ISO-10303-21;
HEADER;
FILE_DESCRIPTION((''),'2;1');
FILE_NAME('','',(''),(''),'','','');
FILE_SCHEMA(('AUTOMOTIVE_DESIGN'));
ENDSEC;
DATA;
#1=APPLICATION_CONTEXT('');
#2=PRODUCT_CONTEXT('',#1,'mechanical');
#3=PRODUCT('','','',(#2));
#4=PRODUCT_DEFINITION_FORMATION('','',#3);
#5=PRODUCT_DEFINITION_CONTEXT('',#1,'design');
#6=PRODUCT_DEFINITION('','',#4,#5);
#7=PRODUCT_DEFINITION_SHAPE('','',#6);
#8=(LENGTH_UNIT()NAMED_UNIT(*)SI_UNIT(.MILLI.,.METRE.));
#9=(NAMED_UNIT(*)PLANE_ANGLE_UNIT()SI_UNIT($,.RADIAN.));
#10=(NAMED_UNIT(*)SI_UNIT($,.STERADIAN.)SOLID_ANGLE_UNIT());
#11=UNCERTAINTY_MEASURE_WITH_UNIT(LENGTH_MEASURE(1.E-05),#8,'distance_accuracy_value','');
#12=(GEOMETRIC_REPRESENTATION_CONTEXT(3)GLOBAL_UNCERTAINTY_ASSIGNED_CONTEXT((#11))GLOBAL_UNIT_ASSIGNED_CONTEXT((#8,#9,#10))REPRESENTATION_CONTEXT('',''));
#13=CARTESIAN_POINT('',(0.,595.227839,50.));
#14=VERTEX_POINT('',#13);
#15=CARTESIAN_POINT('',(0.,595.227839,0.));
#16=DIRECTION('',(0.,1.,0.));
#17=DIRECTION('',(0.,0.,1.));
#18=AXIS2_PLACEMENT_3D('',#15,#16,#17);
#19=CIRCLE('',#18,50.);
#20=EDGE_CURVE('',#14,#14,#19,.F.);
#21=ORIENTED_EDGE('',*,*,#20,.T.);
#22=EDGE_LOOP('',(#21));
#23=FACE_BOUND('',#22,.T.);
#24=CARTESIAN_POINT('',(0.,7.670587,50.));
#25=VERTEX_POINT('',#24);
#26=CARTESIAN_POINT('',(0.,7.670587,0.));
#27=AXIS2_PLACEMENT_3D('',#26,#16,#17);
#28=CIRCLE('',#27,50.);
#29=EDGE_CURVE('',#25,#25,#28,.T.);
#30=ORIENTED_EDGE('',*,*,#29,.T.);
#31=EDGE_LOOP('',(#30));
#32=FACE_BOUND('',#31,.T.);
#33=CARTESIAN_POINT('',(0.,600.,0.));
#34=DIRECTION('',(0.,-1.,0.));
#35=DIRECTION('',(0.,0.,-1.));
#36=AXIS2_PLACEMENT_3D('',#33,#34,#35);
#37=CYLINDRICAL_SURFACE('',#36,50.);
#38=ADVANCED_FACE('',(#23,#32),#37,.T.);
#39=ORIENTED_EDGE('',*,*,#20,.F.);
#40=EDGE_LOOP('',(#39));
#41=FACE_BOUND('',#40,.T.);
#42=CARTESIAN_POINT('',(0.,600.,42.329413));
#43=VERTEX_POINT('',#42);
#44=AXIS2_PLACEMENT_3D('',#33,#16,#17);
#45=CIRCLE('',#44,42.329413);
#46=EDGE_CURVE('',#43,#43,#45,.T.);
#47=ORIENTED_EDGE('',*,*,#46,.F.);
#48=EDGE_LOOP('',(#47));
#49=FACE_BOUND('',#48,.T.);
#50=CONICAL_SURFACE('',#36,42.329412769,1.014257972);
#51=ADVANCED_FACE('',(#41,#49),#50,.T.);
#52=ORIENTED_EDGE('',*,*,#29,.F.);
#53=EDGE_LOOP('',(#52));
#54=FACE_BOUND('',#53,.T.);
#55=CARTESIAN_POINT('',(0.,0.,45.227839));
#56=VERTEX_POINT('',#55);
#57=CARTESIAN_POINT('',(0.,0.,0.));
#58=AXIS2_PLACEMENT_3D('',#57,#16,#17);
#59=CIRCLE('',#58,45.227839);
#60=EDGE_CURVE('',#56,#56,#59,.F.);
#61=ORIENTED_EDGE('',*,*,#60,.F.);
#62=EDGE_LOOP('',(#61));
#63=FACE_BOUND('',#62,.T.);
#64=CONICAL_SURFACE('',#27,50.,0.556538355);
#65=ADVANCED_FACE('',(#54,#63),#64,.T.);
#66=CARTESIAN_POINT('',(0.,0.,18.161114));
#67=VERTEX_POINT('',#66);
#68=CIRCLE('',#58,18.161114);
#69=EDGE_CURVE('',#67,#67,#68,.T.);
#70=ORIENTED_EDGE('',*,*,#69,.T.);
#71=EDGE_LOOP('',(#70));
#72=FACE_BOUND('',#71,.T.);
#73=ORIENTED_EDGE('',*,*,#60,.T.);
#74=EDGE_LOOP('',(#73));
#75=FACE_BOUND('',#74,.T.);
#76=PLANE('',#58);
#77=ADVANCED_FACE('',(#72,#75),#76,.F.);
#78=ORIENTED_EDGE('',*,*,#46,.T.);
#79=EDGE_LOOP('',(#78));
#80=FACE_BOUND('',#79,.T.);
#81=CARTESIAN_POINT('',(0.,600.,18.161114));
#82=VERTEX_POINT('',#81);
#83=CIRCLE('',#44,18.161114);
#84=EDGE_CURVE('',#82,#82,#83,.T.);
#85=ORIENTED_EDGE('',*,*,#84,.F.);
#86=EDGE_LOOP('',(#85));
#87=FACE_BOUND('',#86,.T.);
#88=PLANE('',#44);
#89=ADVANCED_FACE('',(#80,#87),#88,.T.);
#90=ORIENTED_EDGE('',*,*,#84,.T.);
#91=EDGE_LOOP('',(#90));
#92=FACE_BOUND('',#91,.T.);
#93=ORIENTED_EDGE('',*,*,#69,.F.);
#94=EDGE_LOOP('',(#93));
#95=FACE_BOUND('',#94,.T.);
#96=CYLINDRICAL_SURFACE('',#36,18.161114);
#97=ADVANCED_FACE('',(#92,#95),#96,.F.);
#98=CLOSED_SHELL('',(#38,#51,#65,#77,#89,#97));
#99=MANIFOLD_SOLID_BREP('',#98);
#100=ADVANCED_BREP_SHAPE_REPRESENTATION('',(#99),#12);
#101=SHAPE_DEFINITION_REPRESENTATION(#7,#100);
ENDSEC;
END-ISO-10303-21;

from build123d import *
from OCP.BRepFilletAPI import BRepFilletAPI_MakeChamfer

# Parameters (mm, degrees)
SKETCH1_R           = 50
BOSS_EXTRUDE1_DEPTH = 600
SKETCH2_R           = 18.161114409
CUT_EXTRUDE1_DEPTH  = 605.15229868
CHAMFER1_SIZE       = 4.77216119
CHAMFER1_SIZE2      = 7.670587231


with BuildPart() as part:
    # Sketch1 → Boss-Extrude1 (new body)
    with BuildSketch(Plane(origin=(0, 0, 0), x_dir=(1, 0, 0), z_dir=(0, 1, 0))):
        Circle(SKETCH1_R)
    extrude(amount=BOSS_EXTRUDE1_DEPTH)

    # Sketch2 → Cut-Extrude1 (cut, through all)
    with BuildSketch(Plane(origin=(0, 0, 0), x_dir=(1, 0, 0), z_dir=(0, 1, 0))):
        Circle(SKETCH2_R)
    extrude(amount=CUT_EXTRUDE1_DEPTH, mode=Mode.SUBTRACT)

    # Chamfer1: one chamfer whose edges measure the first distance from different faces: ONE call of the kernel's chamfer builder (chamfer() names one face for all edges)
    chamfer1_edges_1 = [part.edges().sort_by_distance(p)[0] for p in [
        (-50, 600, 0),
    ]]
    chamfer1_side_1 = [part.faces().sort_by_distance(p)[0] for p in [
        (-50, 300, 0),
    ]]
    chamfer1_edges_2 = [part.edges().sort_by_distance(p)[0] for p in [
        (-50, 0, 0),
    ]]
    chamfer1_side_2 = [part.faces().sort_by_distance(p)[0] for p in [
        (-48.585786438, 0, 0),
    ]]
    chamfer1 = BRepFilletAPI_MakeChamfer(part.part.solid().wrapped)
    for e in chamfer1_edges_1:
        chamfer1.Add(CHAMFER1_SIZE, CHAMFER1_SIZE2, e.wrapped, chamfer1_side_1[0].wrapped)  # the first distance lies on this face
    for e in chamfer1_edges_2:
        chamfer1.Add(CHAMFER1_SIZE, CHAMFER1_SIZE2, e.wrapped, chamfer1_side_2[0].wrapped)  # the first distance lies on this face
    add(Compound.cast(chamfer1.Shape()), mode=Mode.REPLACE)


solid = part.part
